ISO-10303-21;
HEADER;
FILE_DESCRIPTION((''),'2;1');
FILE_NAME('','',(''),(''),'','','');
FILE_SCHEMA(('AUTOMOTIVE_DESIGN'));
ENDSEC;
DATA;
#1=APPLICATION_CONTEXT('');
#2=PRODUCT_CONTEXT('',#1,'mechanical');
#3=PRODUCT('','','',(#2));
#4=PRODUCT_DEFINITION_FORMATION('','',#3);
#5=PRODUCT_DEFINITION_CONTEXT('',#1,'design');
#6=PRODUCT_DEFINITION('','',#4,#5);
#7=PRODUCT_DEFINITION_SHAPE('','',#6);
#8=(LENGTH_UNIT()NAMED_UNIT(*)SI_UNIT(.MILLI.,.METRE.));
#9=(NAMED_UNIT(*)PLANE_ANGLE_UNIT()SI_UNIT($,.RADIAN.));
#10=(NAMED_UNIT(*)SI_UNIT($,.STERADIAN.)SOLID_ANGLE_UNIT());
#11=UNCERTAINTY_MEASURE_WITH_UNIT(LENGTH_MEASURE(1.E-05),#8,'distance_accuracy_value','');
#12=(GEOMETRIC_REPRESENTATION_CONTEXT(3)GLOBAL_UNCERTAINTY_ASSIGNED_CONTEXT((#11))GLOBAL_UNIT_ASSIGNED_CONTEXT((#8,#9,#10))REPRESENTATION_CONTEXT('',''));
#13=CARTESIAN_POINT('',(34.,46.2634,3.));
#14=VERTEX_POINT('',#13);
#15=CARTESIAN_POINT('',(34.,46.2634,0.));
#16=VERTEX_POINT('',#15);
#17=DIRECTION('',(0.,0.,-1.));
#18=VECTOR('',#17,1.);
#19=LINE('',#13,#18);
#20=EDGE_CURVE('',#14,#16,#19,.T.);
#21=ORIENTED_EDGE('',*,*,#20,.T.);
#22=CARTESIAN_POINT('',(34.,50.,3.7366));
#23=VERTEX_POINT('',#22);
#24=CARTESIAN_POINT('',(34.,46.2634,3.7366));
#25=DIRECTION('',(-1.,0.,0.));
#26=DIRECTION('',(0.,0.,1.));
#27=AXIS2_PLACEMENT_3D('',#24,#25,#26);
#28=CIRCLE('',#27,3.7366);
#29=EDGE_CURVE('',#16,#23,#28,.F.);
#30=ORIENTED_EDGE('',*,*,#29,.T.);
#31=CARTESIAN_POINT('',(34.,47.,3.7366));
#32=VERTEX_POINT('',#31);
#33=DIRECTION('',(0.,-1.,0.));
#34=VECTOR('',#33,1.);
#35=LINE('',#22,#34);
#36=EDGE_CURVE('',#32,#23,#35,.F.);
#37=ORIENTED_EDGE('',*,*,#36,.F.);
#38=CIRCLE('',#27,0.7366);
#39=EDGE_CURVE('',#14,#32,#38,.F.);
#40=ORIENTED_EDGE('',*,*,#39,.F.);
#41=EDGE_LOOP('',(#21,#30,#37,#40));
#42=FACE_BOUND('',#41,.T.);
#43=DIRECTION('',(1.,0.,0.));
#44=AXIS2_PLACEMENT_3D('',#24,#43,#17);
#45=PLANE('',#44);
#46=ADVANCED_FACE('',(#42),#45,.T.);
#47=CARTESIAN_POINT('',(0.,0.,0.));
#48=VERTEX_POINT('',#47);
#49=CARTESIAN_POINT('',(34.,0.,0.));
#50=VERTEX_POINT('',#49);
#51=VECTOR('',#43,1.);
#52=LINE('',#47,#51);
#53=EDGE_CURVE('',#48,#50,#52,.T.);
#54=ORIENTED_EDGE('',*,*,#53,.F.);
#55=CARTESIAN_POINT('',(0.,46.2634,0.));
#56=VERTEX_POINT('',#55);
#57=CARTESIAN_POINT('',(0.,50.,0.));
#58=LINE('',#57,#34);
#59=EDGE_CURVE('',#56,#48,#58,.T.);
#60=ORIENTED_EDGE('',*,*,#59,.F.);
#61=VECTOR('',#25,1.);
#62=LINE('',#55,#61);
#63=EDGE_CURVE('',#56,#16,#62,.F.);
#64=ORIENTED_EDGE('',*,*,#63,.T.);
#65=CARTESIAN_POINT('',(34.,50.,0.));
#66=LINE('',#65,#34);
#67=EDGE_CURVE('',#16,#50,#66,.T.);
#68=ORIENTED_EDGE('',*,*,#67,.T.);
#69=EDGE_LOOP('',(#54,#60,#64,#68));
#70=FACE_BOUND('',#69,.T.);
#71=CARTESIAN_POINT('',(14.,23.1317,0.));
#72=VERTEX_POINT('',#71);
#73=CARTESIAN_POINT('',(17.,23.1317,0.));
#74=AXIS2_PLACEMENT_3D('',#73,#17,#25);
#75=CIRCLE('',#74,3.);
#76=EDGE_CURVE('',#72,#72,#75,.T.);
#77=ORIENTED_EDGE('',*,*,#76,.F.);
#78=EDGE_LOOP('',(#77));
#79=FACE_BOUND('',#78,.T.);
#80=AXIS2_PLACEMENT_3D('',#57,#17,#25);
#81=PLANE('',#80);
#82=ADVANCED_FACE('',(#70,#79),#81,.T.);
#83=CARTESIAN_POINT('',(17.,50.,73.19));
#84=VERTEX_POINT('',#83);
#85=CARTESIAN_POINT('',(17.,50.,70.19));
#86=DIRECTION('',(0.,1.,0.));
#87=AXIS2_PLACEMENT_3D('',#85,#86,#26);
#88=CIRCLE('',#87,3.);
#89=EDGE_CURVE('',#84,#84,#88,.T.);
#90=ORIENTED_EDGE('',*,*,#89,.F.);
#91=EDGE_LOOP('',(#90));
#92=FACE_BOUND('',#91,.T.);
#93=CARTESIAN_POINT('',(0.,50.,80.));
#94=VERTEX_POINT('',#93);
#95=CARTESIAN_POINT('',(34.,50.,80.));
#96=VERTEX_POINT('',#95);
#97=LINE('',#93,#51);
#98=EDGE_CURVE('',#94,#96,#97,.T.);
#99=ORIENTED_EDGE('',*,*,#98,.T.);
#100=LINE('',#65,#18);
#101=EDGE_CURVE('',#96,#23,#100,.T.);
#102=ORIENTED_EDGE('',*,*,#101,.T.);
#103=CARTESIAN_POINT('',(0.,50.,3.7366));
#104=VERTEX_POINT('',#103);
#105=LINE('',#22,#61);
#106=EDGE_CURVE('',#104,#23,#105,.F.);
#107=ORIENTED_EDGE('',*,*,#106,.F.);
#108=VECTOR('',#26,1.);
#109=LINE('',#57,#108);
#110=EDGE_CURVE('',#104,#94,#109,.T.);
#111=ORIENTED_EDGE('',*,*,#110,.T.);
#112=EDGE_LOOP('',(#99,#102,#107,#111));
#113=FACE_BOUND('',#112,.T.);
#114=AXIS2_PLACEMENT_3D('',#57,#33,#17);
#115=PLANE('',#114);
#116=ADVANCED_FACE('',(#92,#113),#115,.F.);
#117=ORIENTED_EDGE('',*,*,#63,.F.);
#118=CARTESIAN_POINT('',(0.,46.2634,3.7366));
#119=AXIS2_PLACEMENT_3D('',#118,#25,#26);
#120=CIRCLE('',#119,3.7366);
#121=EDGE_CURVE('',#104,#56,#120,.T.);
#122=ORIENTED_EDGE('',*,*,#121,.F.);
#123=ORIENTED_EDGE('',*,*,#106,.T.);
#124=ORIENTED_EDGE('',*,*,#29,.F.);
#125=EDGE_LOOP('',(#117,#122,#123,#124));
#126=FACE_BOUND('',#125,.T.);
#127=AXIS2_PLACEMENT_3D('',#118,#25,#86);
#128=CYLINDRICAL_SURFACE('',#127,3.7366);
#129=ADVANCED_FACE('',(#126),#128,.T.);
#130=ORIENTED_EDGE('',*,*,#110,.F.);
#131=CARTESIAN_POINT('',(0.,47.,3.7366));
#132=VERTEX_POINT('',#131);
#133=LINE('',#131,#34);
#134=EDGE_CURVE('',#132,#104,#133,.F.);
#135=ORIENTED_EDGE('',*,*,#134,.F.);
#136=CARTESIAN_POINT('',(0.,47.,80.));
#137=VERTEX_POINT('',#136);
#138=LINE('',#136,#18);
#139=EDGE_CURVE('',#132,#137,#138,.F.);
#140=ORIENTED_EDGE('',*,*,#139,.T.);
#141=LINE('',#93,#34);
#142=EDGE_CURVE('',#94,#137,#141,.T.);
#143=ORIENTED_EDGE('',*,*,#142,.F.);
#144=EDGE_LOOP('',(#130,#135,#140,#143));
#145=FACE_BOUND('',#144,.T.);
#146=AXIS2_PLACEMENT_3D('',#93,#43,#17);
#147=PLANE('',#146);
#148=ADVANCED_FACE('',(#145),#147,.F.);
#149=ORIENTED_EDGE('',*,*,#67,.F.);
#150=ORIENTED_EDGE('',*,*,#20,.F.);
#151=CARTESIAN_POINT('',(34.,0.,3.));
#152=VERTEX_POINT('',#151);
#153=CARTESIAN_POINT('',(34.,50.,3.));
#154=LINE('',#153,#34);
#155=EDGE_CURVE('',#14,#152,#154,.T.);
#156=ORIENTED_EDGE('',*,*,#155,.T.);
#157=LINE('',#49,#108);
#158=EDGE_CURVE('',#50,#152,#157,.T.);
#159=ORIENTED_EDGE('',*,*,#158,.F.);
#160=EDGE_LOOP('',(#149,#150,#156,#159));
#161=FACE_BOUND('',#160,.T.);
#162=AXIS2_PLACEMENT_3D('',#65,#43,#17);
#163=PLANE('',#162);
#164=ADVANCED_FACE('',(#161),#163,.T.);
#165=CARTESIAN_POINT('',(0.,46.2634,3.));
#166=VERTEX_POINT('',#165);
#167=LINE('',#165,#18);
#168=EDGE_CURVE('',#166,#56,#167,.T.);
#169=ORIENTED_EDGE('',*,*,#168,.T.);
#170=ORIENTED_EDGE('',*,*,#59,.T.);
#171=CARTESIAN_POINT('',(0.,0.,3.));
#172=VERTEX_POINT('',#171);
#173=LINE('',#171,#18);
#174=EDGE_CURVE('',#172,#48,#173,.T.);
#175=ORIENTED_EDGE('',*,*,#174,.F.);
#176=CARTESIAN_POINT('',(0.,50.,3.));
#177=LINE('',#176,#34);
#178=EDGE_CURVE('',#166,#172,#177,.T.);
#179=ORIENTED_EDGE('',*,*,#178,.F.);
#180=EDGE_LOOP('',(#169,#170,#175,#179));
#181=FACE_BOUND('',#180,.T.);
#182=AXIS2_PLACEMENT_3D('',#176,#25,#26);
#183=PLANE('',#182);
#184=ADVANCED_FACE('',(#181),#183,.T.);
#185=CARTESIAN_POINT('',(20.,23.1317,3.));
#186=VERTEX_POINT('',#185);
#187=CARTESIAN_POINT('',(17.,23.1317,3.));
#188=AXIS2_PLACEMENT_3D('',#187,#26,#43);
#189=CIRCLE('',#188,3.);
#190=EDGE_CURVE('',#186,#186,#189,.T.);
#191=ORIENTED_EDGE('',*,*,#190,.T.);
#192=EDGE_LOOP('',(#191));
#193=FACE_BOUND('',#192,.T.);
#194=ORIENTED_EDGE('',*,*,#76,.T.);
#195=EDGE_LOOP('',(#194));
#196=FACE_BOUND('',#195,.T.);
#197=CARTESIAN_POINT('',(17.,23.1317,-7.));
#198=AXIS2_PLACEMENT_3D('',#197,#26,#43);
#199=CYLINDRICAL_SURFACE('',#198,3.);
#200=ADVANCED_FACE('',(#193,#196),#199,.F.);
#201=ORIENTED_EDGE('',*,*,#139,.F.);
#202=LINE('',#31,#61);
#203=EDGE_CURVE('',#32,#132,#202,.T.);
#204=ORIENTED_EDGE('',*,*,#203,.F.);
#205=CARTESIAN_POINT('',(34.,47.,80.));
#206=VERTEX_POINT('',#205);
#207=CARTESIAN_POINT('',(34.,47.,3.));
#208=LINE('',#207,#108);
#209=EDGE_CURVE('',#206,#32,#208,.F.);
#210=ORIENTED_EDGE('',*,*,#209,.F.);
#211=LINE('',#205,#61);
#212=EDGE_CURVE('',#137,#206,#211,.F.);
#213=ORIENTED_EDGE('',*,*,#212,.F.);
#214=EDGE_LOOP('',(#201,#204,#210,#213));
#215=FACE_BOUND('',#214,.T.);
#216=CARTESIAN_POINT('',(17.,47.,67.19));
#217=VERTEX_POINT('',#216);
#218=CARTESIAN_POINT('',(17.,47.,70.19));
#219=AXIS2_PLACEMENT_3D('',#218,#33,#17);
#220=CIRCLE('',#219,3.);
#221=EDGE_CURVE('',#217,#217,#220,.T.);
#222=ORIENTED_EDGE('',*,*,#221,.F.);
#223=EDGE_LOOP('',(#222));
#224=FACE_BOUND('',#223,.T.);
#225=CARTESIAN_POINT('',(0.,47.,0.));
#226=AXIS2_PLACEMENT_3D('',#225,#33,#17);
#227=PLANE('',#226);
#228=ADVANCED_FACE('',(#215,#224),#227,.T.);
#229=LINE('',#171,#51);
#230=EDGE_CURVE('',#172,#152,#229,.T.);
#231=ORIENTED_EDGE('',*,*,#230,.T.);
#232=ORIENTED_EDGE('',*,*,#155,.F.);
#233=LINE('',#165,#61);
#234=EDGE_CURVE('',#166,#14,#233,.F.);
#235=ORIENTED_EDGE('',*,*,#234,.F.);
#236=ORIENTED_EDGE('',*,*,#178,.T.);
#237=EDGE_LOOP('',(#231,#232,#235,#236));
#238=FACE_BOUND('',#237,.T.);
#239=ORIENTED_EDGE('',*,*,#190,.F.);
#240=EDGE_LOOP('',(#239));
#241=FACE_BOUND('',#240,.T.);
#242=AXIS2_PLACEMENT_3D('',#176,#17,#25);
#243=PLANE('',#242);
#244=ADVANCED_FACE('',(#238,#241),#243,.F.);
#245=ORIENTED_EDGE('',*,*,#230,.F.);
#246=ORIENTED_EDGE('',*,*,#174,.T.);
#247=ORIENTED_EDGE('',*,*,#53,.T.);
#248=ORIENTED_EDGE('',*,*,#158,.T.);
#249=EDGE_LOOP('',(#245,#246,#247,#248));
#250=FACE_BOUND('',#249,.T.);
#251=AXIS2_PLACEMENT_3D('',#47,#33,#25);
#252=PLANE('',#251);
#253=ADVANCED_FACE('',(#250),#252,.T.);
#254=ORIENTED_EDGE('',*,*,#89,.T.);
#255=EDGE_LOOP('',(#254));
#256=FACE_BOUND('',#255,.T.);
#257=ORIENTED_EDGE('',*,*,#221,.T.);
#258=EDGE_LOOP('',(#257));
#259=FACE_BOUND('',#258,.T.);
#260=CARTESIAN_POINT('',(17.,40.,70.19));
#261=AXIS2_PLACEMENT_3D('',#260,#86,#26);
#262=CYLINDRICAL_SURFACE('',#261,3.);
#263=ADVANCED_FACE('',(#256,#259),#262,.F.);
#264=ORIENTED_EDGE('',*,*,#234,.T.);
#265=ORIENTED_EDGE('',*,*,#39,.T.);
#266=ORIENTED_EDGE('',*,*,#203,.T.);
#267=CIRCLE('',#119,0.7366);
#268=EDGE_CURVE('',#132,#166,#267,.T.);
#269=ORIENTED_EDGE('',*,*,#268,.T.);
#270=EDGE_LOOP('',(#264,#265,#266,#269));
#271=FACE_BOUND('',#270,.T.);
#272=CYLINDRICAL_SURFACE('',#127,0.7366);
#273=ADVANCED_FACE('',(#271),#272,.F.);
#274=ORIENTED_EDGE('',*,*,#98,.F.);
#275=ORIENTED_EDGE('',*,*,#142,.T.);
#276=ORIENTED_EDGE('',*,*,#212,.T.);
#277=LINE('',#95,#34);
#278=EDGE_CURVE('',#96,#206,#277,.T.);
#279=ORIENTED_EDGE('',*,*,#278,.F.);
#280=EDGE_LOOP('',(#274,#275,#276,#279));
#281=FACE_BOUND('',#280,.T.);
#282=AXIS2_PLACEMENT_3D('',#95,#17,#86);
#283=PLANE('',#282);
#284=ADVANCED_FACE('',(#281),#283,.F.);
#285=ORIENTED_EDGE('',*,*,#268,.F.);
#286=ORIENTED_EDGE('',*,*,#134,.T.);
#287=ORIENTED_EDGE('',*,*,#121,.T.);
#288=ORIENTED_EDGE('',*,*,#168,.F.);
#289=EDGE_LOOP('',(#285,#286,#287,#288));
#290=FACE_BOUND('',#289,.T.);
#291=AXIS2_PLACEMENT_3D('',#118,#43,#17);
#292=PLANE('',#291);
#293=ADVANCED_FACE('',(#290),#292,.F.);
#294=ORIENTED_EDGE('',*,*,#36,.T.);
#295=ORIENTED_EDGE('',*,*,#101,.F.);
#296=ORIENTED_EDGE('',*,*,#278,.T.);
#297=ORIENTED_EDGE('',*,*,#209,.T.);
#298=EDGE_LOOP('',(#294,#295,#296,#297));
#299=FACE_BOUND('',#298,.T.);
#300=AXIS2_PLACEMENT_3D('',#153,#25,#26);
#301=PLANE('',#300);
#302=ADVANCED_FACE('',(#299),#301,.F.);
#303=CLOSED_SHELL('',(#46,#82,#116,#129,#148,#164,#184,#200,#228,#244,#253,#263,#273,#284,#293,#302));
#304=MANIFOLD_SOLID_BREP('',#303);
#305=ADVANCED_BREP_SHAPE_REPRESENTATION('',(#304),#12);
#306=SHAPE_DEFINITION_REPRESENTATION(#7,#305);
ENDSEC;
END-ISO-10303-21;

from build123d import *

# Parameters (mm, degrees)
SKETCH1_W                    = 34
SKETCH1_H                    = 3
BASE_FLANGE1_DEPTH           = 50
EDGE_FLANGE1_STRIP_W         = 13.4732
EDGE_FLANGE1_STRIP_H         = 3
EDGE_FLANGE1_STRIP_CUT_DEPTH = 34
EDGE_FLANGE1_DEPTH           = 34
SKETCH9_R                    = 3
CUT_EXTRUDE1_DEPTH           = 10
SKETCH10_R                   = 3
CUT_EXTRUDE2_DEPTH           = 10


# Sheet-metal steps are written as plain solids
with BuildPart() as part:
    # Sketch1 → Base-Flange1 (new body)
    with BuildSketch(Plane(origin=(0, 0, 0), x_dir=(1, 0, 0), z_dir=(0, 1, 0))):
        with Locations((17, -1.5)):
            Rectangle(SKETCH1_W, SKETCH1_H)
    extrude(amount=BASE_FLANGE1_DEPTH)

    # Edge-Flange1 strip (across the edge) → Edge-Flange1 strip cut (cut)
    with BuildSketch(Plane(origin=(34, 50, 3), x_dir=(0, -1, 0), z_dir=(-1, 0, 0))):
        with Locations((-3, -1.5)):
            Rectangle(EDGE_FLANGE1_STRIP_W, EDGE_FLANGE1_STRIP_H)
    extrude(amount=EDGE_FLANGE1_STRIP_CUT_DEPTH, mode=Mode.SUBTRACT)

    # Edge-Flange1 section (across the edge) → Edge-Flange1 (add)
    with BuildSketch(Plane(origin=(34, 50, 3), x_dir=(0, -1, 0), z_dir=(-1, 0, 0))):
        with BuildLine():
            Line((0, 0.7366), (0, 77))
            Line((0, 77), (3, 77))
            Line((3, 77), (3, 0.7366))
            ThreePointArc((3, 0.7366), (3.215745145, 0.215745145), (3.7366, 0))
            Line((3.7366, 0), (3.7366, -3))
            ThreePointArc((3.7366, -3), (1.094424801, -1.905575199), (0, 0.7366))
        make_face()
    extrude(amount=EDGE_FLANGE1_DEPTH)

    # Sketch9 → Cut-Extrude1 (cut)
    with BuildSketch(Plane(origin=(0, 50, 0), x_dir=(1, 0, 0), z_dir=(0, 1, 0))):
        with Locations(Location((17, -70.19, 0), (0, 0, 270))):
            Circle(SKETCH9_R)
    extrude(amount=-CUT_EXTRUDE1_DEPTH, mode=Mode.SUBTRACT)

    # Sketch10 → Cut-Extrude2 (cut)
    with BuildSketch(Plane.XY.offset(3)):
        with Locations((17, 23.1317)):
            Circle(SKETCH10_R)
    extrude(amount=-CUT_EXTRUDE2_DEPTH, mode=Mode.SUBTRACT)


solid = part.part
